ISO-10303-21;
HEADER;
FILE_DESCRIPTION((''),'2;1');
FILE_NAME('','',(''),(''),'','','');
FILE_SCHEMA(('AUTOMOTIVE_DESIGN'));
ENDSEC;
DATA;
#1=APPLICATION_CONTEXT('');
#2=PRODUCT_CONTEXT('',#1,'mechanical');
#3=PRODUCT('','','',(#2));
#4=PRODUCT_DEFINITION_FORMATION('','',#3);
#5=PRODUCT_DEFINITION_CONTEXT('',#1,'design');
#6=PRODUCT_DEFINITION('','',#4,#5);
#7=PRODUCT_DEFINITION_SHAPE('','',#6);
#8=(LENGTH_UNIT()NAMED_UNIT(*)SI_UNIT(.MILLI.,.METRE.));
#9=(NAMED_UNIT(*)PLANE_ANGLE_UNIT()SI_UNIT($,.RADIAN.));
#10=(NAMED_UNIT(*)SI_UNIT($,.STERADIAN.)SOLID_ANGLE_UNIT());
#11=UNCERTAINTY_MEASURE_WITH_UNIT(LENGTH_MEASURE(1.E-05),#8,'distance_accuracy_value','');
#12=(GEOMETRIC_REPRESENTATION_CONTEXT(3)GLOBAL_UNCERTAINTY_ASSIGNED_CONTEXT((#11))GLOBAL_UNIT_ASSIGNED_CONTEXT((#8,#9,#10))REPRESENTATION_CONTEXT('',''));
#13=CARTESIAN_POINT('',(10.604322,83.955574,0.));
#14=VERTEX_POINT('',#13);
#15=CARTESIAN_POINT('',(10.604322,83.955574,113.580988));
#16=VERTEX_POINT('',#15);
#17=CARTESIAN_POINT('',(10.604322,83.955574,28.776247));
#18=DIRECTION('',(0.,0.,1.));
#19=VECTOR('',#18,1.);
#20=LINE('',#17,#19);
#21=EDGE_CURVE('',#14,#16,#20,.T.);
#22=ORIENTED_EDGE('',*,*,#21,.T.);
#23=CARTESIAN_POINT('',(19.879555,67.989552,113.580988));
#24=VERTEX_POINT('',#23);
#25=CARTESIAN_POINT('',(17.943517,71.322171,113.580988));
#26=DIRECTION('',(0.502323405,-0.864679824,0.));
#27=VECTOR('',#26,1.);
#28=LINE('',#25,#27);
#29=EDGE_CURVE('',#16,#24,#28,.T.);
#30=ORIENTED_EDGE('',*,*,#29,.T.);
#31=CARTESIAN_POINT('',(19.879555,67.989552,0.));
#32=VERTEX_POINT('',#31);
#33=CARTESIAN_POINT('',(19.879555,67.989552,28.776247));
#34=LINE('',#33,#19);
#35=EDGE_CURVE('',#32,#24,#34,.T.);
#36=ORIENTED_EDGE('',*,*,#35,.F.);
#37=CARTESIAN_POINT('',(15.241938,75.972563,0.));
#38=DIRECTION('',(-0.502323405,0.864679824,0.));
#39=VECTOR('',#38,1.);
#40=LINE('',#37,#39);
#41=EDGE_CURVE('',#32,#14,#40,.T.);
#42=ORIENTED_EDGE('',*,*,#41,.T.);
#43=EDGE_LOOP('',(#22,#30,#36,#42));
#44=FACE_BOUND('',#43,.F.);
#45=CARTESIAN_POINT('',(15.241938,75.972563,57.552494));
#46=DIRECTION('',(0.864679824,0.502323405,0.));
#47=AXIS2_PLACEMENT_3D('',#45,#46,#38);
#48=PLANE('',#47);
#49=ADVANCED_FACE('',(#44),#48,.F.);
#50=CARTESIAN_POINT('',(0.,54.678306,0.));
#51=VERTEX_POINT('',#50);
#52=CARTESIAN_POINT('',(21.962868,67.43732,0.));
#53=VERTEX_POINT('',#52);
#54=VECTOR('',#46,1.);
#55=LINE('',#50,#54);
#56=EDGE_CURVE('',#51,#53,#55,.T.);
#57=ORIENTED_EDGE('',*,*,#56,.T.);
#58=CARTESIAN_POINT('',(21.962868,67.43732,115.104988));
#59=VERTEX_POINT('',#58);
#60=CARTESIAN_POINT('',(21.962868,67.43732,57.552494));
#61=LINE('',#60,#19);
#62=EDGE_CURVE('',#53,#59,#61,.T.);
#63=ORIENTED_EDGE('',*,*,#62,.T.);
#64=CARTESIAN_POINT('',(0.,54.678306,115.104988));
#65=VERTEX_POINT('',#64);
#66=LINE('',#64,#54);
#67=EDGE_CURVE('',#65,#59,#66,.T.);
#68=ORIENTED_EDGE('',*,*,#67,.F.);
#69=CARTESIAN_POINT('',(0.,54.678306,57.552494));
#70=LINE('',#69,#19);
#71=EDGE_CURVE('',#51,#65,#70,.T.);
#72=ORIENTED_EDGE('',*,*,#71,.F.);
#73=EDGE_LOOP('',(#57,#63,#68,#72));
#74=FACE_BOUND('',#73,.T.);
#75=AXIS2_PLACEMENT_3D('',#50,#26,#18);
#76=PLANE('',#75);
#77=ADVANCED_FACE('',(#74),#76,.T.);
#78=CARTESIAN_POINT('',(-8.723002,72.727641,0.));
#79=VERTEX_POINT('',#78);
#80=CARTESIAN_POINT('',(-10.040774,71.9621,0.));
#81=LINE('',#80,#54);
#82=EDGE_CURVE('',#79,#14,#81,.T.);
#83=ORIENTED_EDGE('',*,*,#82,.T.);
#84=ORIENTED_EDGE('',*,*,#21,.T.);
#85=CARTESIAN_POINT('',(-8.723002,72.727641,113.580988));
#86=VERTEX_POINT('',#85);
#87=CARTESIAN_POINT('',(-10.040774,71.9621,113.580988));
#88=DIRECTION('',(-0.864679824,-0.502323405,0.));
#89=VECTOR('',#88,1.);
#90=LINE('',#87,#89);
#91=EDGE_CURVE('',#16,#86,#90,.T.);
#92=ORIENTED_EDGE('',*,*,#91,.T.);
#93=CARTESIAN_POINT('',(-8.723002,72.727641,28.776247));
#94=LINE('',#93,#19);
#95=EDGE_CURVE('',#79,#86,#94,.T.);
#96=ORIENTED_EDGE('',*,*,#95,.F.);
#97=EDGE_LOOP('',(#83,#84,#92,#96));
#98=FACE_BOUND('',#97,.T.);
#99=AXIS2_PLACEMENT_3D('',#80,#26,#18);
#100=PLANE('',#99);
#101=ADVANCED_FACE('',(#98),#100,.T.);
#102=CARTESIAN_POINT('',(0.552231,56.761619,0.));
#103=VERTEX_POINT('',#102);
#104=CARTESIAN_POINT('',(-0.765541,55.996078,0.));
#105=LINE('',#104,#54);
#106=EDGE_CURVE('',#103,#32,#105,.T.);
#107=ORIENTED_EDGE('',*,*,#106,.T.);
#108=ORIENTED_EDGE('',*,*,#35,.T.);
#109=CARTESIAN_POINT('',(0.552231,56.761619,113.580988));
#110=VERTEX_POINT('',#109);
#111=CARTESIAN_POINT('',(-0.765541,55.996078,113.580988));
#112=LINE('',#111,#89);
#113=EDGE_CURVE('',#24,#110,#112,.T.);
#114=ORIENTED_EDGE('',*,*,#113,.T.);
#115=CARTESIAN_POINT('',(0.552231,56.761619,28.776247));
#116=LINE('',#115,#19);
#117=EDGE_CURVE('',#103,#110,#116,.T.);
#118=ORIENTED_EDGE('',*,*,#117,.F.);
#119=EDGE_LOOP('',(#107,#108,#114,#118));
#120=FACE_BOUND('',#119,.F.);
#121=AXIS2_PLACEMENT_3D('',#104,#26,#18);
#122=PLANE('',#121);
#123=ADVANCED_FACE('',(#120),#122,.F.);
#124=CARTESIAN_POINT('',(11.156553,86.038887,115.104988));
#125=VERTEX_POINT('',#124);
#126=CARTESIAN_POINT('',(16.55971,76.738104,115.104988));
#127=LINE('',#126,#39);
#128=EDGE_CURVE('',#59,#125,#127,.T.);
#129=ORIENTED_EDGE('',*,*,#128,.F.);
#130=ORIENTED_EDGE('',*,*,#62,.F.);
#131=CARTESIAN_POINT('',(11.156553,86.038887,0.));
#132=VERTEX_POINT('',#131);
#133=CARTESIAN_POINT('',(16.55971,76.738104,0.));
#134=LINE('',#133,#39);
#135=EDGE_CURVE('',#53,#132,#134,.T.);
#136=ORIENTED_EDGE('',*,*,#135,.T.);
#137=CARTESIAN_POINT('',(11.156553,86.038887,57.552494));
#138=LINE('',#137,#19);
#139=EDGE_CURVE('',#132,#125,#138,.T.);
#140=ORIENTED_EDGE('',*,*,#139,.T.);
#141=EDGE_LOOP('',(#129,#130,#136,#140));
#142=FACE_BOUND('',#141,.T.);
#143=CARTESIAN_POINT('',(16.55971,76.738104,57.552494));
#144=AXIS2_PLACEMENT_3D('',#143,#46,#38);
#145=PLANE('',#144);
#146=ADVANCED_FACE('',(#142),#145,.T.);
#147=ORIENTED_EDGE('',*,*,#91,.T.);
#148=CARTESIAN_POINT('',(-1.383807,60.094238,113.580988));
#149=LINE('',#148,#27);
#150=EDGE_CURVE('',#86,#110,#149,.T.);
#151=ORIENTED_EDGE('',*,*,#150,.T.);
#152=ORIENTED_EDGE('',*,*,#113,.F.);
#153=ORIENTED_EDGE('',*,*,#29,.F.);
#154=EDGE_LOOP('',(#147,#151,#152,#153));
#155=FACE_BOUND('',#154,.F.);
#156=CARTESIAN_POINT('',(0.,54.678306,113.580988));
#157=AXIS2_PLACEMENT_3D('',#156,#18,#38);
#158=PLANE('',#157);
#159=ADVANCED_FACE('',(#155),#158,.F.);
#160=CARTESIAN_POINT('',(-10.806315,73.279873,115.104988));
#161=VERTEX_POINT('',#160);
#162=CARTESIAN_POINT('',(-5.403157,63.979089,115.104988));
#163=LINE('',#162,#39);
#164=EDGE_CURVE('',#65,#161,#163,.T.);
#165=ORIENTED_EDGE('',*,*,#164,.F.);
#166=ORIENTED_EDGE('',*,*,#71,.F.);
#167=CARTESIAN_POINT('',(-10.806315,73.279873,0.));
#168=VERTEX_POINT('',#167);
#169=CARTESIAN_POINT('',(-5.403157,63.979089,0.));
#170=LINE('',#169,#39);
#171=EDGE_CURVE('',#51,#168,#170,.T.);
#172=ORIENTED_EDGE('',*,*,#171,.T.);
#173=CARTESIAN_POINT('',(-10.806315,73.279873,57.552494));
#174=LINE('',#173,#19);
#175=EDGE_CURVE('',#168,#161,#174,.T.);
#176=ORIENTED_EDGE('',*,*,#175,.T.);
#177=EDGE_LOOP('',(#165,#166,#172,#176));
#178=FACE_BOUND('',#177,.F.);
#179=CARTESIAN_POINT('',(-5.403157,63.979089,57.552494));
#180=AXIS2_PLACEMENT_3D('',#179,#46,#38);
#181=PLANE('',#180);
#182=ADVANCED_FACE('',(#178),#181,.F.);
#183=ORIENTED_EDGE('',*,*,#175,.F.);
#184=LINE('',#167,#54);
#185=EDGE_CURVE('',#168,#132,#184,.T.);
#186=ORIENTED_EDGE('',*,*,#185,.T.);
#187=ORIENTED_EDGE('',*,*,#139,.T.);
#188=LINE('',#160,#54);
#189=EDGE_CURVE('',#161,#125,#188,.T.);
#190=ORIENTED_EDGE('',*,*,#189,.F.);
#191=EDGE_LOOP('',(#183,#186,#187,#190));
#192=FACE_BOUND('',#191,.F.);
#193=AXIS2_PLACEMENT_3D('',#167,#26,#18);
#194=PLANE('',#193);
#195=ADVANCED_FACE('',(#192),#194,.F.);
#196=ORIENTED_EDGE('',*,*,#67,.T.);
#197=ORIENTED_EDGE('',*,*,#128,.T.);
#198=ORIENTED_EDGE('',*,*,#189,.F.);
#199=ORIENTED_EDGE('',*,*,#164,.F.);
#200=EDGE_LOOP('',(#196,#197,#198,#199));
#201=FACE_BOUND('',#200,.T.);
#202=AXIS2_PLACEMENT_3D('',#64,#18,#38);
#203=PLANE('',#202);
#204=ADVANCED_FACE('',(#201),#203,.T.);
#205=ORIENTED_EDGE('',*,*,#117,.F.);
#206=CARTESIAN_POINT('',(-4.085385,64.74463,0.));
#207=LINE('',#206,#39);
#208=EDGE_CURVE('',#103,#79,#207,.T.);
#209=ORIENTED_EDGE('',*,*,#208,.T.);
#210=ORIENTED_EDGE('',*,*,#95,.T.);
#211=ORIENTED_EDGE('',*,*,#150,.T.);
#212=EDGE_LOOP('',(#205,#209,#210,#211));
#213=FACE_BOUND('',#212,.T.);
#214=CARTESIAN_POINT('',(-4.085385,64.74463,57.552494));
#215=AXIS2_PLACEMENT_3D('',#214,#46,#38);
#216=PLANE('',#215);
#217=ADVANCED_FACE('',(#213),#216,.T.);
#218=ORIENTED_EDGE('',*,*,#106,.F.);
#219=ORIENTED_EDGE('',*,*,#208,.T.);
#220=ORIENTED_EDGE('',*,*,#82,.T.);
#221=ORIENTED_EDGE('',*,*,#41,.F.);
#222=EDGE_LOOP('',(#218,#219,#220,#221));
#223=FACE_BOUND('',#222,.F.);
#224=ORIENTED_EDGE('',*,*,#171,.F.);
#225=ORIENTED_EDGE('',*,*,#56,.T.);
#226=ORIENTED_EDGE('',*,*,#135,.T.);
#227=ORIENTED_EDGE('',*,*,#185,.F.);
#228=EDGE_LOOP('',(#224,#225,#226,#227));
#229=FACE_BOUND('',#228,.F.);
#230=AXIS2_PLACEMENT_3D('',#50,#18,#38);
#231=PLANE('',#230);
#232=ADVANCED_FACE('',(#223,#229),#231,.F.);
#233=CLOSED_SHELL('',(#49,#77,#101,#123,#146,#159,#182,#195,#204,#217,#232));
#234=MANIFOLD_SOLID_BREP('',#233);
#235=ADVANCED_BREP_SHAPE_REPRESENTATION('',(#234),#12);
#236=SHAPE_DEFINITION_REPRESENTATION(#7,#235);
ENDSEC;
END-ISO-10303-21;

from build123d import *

# Parameters (mm, degrees)
F1_E2_W  = 21.512664049
F1_E2_H  = 115.1049882174
F3_DEPTH = 25.4
F4_T     = -1.524


with BuildPart() as f3:
    # F1_E2 (on explicit) → F3 (new body)
    with BuildSketch(Plane(origin=(0, 54.6783059835, 0), x_dir=(-0.5023234046, 0.8646798235, 0), z_dir=(0.8646798235, 0.5023234046, 0))):
        with Locations((10.7563320245, 57.5524941087)):
            Rectangle(F1_E2_W, F1_E2_H)
    extrude(amount=F3_DEPTH)

    # F4
    f4_openings = [f3.faces().sort_by_distance(p)[0] for p in [
        (5.578276, 70.358596, 0),
    ]]
    offset(amount=F4_T, openings=f4_openings)


solid = f3.part
